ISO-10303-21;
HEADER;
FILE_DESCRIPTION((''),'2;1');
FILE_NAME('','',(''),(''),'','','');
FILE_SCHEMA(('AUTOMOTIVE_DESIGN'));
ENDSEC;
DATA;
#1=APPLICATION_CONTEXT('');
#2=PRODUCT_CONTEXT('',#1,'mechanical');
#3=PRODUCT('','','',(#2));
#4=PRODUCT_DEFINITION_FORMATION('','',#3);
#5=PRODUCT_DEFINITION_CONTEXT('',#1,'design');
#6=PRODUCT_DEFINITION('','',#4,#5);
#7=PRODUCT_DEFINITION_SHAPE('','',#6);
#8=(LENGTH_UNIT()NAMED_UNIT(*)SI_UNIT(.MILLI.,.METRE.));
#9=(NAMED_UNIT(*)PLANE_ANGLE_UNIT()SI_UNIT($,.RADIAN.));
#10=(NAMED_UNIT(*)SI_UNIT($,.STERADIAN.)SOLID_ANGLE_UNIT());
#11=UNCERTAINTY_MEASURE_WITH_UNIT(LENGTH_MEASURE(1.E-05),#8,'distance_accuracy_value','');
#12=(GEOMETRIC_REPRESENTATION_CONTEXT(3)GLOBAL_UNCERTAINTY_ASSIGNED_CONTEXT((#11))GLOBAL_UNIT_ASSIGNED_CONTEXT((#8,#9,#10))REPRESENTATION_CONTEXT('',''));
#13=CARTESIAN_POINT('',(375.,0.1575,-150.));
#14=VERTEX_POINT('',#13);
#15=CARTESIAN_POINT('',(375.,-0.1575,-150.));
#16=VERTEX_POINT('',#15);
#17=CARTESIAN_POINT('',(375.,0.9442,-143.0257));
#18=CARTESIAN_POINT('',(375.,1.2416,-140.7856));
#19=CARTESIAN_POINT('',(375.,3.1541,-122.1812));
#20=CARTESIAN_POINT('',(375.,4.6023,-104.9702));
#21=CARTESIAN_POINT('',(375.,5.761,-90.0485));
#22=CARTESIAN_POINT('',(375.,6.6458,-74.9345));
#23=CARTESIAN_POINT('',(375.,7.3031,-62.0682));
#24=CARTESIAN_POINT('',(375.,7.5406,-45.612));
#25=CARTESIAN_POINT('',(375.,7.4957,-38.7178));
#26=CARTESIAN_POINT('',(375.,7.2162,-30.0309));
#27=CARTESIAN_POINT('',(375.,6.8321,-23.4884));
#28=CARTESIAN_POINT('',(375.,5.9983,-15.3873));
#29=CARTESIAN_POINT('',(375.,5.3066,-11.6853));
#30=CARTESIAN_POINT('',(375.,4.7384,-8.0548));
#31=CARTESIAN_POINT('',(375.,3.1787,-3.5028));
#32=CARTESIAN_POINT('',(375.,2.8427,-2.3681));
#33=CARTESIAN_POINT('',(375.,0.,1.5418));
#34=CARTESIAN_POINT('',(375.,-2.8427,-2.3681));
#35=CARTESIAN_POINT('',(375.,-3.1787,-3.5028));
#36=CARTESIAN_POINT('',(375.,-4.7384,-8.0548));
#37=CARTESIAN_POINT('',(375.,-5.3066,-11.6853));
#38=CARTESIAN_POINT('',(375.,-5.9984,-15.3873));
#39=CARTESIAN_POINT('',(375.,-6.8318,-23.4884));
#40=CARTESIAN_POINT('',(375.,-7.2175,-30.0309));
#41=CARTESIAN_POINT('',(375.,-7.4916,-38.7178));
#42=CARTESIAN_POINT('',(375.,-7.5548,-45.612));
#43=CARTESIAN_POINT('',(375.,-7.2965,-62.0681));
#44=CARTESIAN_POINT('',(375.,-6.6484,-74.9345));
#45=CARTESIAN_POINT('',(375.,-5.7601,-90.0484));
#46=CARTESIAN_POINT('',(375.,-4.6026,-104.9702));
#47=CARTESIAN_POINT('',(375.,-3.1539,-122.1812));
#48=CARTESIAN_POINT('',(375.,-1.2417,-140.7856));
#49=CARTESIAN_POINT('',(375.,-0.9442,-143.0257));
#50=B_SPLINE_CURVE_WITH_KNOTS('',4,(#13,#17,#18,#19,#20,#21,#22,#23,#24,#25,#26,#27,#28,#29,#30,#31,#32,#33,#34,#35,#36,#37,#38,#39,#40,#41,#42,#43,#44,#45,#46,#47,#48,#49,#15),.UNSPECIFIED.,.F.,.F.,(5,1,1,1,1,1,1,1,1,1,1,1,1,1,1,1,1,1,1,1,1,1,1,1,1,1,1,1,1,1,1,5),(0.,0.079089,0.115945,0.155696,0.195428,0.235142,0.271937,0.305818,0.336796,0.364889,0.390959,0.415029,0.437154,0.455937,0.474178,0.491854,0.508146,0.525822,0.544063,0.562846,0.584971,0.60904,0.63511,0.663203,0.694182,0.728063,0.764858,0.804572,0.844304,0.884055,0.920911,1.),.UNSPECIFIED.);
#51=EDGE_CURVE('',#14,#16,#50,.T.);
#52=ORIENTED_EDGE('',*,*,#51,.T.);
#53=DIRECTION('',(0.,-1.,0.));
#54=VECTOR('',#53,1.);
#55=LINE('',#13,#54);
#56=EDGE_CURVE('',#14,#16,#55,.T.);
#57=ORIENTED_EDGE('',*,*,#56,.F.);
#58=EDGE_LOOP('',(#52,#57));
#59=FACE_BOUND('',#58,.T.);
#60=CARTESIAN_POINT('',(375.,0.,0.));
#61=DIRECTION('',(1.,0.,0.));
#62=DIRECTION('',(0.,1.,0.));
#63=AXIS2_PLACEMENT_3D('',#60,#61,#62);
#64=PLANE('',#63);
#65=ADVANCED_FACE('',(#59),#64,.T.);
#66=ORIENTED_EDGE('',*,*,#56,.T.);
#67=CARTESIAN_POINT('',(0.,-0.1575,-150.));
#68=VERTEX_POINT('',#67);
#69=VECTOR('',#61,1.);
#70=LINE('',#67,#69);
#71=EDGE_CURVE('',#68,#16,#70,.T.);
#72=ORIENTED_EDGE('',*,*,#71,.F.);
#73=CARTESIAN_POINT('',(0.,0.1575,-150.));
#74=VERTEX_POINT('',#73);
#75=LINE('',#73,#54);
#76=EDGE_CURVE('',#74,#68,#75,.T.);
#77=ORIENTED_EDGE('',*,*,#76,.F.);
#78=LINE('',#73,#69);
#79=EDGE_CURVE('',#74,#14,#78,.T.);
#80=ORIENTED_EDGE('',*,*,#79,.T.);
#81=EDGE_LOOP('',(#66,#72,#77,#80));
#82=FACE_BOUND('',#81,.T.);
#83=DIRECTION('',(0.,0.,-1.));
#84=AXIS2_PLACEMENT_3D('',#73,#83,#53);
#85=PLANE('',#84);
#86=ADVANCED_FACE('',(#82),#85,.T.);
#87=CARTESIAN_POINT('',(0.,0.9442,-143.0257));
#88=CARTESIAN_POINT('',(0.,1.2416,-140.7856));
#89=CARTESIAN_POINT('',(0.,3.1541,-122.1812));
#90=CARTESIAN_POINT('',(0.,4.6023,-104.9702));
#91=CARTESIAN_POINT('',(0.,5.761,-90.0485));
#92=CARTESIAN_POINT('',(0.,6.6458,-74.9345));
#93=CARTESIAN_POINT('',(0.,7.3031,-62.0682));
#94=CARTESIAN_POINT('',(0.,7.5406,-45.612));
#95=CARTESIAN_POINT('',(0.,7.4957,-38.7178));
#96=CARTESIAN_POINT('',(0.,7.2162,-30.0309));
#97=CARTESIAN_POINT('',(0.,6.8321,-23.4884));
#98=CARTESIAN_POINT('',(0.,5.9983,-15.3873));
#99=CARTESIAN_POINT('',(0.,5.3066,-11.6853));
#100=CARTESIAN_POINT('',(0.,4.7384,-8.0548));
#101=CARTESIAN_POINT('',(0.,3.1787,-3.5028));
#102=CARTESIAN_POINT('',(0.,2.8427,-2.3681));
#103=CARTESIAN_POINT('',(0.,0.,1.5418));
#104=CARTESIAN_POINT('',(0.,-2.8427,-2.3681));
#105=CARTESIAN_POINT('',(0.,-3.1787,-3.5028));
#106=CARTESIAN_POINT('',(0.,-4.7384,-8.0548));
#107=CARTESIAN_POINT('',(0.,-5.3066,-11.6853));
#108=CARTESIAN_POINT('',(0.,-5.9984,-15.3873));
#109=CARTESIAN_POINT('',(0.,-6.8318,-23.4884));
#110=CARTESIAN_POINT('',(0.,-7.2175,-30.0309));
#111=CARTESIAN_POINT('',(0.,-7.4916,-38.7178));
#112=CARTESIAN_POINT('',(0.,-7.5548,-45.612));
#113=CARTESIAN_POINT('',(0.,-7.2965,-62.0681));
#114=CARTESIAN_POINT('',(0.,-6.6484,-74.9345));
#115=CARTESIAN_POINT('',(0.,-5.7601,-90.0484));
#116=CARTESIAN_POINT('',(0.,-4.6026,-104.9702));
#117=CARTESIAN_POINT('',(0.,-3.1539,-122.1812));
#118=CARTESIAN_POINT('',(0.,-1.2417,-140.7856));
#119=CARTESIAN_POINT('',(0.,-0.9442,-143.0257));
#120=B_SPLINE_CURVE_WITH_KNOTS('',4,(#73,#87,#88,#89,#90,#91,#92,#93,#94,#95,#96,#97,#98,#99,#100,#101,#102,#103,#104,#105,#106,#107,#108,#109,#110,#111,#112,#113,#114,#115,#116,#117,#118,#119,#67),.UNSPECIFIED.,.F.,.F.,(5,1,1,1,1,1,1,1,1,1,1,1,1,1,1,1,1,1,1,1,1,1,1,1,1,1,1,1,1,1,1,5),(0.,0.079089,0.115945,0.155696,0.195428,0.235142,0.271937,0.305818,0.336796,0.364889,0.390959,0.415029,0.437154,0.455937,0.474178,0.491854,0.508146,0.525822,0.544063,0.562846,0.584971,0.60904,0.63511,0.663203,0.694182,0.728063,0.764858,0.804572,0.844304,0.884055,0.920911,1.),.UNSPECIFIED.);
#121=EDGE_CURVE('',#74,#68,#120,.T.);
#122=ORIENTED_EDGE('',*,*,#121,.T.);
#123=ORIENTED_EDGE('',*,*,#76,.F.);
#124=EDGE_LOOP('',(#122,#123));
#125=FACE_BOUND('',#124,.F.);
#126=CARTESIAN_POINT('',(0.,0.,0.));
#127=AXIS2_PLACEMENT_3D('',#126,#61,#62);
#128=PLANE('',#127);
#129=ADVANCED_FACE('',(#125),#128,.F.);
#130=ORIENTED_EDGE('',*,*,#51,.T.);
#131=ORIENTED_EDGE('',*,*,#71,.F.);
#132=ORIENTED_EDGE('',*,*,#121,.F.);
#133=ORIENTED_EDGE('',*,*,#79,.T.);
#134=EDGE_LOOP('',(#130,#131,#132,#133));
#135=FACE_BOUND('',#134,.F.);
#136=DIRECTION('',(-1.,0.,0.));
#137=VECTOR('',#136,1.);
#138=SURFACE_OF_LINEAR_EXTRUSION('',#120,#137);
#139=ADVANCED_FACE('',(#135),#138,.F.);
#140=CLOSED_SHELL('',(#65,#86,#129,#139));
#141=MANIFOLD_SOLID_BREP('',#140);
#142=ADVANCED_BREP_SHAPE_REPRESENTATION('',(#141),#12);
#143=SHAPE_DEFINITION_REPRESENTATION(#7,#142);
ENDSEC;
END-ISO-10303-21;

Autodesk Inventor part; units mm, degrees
ref_plane "YZ Plane" through (0, 0, 0) normal (1, 0, 0) x (0, 1, 0)
ref_plane "XZ Plane" through (0, 0, 0) normal (0, 1, 0) x (-1, 0, 0)
sketch "Sketch1" plane through (0, 0, 0) normal (1, 0, 0) x (0, 1, 0)
  spline S0 degree 4 poles (0.1575, -150) (0.9442, -143.0257) (1.2416, -140.7856) (3.1541, -122.1812) (4.6023, -104.9702) (5.761, -90.0485) (6.6458, -74.9345) (7.3031, -62.0682) (7.5406, -45.612) (7.4957, -38.7178) (7.2162, -30.0309) (6.8321, -23.4884) (5.9983, -15.3873) (5.3066, -11.6853) (4.7384, -8.0548) (3.1787, -3.5028) (2.8427, -2.3681) (0, 1.5418) (-2.8427, -2.3681) (-3.1787, -3.5028) (-4.7384, -8.0548) (-5.3066, -11.6853) (-5.9984, -15.3873) (-6.8318, -23.4884) (-7.2175, -30.0309) (-7.4916, -38.7178) (-7.5548, -45.612) (-7.2965, -62.0681) (-6.6484, -74.9345) (-5.7601, -90.0484) (-4.6026, -104.9702) (-3.1539, -122.1812) (-1.2417, -140.7856) (-0.9442, -143.0257) (-0.1575, -150) knots 0 0 0 0 0 0.079089 0.115945 0.155696 0.195428 0.235142 0.271937 0.305818 0.336796 0.364889 0.390959 0.415029 0.437154 0.455937 0.474178 0.491854 0.508146 0.525822 0.544063 0.562846 0.584971 0.60904 0.63511 0.663203 0.694182 0.728063 0.764858 0.804572 0.844304 0.884055 0.920911 1 1 1 1 1
  line L0 (0.1575, -150) -> (-0.1575, -150)
  line L1 (0, 0) -> (0, -150) construction
  line L2 (7.497, -90) -> (7.497, 0) construction
  line L3 (-7.503, -90) -> (-7.503, 0) construction
  point P0 (1.008, -142.5)
  point P1 (1.8105, -135)
  point P2 (3.2805, -120)
  point P3 (4.5795, -105)
  point P4 (5.7045, -90)
  point P5 (6.618, -75)
  point P6 (7.2555, -60)
  point P7 (7.497, -45)
  point P8 (7.428, -37.5)
  point P9 (7.173, -30)
  point P10 (6.6825, -22.5)
  point P11 (5.853, -15)
  point P12 (5.25, -11.25)
  point P13 (4.443, -7.5)
  point P14 (3.267, -3.75)
  point P15 (2.367, -1.875)
  point P16 (-2.367, -1.875)
  point P17 (-3.267, -3.75)
  point P18 (-4.443, -7.5)
  point P19 (-5.25, -11.25)
  point P20 (-5.853, -15)
  point P21 (-6.6825, -22.5)
  point P22 (-7.173, -30)
  point P23 (-7.428, -37.5)
  point P24 (-7.503, -45)
  point P25 (-7.2555, -60)
  point P26 (-6.618, -75)
  point P27 (-5.7045, -90)
  point P28 (-4.5795, -105)
  point P29 (-3.2805, -120)
  point P30 (-1.8105, -135)
  point P31 (-1.008, -142.5)
  point P32 (0, -75)
  point P33 (0, -37.5)
  dimension "d1" = 150
  dimension "d2" = 75
  dimension "d3" = 37.5
  dimension "d5" = 15
ref_plane "Work Plane1" through (0, 0, -37.5) normal (0, 0, 1) x (1, 0, 0)
extrude "Extrusion1" add sketch "Sketch1" along normal blind 375
properties part number "Wing_horizontal"
